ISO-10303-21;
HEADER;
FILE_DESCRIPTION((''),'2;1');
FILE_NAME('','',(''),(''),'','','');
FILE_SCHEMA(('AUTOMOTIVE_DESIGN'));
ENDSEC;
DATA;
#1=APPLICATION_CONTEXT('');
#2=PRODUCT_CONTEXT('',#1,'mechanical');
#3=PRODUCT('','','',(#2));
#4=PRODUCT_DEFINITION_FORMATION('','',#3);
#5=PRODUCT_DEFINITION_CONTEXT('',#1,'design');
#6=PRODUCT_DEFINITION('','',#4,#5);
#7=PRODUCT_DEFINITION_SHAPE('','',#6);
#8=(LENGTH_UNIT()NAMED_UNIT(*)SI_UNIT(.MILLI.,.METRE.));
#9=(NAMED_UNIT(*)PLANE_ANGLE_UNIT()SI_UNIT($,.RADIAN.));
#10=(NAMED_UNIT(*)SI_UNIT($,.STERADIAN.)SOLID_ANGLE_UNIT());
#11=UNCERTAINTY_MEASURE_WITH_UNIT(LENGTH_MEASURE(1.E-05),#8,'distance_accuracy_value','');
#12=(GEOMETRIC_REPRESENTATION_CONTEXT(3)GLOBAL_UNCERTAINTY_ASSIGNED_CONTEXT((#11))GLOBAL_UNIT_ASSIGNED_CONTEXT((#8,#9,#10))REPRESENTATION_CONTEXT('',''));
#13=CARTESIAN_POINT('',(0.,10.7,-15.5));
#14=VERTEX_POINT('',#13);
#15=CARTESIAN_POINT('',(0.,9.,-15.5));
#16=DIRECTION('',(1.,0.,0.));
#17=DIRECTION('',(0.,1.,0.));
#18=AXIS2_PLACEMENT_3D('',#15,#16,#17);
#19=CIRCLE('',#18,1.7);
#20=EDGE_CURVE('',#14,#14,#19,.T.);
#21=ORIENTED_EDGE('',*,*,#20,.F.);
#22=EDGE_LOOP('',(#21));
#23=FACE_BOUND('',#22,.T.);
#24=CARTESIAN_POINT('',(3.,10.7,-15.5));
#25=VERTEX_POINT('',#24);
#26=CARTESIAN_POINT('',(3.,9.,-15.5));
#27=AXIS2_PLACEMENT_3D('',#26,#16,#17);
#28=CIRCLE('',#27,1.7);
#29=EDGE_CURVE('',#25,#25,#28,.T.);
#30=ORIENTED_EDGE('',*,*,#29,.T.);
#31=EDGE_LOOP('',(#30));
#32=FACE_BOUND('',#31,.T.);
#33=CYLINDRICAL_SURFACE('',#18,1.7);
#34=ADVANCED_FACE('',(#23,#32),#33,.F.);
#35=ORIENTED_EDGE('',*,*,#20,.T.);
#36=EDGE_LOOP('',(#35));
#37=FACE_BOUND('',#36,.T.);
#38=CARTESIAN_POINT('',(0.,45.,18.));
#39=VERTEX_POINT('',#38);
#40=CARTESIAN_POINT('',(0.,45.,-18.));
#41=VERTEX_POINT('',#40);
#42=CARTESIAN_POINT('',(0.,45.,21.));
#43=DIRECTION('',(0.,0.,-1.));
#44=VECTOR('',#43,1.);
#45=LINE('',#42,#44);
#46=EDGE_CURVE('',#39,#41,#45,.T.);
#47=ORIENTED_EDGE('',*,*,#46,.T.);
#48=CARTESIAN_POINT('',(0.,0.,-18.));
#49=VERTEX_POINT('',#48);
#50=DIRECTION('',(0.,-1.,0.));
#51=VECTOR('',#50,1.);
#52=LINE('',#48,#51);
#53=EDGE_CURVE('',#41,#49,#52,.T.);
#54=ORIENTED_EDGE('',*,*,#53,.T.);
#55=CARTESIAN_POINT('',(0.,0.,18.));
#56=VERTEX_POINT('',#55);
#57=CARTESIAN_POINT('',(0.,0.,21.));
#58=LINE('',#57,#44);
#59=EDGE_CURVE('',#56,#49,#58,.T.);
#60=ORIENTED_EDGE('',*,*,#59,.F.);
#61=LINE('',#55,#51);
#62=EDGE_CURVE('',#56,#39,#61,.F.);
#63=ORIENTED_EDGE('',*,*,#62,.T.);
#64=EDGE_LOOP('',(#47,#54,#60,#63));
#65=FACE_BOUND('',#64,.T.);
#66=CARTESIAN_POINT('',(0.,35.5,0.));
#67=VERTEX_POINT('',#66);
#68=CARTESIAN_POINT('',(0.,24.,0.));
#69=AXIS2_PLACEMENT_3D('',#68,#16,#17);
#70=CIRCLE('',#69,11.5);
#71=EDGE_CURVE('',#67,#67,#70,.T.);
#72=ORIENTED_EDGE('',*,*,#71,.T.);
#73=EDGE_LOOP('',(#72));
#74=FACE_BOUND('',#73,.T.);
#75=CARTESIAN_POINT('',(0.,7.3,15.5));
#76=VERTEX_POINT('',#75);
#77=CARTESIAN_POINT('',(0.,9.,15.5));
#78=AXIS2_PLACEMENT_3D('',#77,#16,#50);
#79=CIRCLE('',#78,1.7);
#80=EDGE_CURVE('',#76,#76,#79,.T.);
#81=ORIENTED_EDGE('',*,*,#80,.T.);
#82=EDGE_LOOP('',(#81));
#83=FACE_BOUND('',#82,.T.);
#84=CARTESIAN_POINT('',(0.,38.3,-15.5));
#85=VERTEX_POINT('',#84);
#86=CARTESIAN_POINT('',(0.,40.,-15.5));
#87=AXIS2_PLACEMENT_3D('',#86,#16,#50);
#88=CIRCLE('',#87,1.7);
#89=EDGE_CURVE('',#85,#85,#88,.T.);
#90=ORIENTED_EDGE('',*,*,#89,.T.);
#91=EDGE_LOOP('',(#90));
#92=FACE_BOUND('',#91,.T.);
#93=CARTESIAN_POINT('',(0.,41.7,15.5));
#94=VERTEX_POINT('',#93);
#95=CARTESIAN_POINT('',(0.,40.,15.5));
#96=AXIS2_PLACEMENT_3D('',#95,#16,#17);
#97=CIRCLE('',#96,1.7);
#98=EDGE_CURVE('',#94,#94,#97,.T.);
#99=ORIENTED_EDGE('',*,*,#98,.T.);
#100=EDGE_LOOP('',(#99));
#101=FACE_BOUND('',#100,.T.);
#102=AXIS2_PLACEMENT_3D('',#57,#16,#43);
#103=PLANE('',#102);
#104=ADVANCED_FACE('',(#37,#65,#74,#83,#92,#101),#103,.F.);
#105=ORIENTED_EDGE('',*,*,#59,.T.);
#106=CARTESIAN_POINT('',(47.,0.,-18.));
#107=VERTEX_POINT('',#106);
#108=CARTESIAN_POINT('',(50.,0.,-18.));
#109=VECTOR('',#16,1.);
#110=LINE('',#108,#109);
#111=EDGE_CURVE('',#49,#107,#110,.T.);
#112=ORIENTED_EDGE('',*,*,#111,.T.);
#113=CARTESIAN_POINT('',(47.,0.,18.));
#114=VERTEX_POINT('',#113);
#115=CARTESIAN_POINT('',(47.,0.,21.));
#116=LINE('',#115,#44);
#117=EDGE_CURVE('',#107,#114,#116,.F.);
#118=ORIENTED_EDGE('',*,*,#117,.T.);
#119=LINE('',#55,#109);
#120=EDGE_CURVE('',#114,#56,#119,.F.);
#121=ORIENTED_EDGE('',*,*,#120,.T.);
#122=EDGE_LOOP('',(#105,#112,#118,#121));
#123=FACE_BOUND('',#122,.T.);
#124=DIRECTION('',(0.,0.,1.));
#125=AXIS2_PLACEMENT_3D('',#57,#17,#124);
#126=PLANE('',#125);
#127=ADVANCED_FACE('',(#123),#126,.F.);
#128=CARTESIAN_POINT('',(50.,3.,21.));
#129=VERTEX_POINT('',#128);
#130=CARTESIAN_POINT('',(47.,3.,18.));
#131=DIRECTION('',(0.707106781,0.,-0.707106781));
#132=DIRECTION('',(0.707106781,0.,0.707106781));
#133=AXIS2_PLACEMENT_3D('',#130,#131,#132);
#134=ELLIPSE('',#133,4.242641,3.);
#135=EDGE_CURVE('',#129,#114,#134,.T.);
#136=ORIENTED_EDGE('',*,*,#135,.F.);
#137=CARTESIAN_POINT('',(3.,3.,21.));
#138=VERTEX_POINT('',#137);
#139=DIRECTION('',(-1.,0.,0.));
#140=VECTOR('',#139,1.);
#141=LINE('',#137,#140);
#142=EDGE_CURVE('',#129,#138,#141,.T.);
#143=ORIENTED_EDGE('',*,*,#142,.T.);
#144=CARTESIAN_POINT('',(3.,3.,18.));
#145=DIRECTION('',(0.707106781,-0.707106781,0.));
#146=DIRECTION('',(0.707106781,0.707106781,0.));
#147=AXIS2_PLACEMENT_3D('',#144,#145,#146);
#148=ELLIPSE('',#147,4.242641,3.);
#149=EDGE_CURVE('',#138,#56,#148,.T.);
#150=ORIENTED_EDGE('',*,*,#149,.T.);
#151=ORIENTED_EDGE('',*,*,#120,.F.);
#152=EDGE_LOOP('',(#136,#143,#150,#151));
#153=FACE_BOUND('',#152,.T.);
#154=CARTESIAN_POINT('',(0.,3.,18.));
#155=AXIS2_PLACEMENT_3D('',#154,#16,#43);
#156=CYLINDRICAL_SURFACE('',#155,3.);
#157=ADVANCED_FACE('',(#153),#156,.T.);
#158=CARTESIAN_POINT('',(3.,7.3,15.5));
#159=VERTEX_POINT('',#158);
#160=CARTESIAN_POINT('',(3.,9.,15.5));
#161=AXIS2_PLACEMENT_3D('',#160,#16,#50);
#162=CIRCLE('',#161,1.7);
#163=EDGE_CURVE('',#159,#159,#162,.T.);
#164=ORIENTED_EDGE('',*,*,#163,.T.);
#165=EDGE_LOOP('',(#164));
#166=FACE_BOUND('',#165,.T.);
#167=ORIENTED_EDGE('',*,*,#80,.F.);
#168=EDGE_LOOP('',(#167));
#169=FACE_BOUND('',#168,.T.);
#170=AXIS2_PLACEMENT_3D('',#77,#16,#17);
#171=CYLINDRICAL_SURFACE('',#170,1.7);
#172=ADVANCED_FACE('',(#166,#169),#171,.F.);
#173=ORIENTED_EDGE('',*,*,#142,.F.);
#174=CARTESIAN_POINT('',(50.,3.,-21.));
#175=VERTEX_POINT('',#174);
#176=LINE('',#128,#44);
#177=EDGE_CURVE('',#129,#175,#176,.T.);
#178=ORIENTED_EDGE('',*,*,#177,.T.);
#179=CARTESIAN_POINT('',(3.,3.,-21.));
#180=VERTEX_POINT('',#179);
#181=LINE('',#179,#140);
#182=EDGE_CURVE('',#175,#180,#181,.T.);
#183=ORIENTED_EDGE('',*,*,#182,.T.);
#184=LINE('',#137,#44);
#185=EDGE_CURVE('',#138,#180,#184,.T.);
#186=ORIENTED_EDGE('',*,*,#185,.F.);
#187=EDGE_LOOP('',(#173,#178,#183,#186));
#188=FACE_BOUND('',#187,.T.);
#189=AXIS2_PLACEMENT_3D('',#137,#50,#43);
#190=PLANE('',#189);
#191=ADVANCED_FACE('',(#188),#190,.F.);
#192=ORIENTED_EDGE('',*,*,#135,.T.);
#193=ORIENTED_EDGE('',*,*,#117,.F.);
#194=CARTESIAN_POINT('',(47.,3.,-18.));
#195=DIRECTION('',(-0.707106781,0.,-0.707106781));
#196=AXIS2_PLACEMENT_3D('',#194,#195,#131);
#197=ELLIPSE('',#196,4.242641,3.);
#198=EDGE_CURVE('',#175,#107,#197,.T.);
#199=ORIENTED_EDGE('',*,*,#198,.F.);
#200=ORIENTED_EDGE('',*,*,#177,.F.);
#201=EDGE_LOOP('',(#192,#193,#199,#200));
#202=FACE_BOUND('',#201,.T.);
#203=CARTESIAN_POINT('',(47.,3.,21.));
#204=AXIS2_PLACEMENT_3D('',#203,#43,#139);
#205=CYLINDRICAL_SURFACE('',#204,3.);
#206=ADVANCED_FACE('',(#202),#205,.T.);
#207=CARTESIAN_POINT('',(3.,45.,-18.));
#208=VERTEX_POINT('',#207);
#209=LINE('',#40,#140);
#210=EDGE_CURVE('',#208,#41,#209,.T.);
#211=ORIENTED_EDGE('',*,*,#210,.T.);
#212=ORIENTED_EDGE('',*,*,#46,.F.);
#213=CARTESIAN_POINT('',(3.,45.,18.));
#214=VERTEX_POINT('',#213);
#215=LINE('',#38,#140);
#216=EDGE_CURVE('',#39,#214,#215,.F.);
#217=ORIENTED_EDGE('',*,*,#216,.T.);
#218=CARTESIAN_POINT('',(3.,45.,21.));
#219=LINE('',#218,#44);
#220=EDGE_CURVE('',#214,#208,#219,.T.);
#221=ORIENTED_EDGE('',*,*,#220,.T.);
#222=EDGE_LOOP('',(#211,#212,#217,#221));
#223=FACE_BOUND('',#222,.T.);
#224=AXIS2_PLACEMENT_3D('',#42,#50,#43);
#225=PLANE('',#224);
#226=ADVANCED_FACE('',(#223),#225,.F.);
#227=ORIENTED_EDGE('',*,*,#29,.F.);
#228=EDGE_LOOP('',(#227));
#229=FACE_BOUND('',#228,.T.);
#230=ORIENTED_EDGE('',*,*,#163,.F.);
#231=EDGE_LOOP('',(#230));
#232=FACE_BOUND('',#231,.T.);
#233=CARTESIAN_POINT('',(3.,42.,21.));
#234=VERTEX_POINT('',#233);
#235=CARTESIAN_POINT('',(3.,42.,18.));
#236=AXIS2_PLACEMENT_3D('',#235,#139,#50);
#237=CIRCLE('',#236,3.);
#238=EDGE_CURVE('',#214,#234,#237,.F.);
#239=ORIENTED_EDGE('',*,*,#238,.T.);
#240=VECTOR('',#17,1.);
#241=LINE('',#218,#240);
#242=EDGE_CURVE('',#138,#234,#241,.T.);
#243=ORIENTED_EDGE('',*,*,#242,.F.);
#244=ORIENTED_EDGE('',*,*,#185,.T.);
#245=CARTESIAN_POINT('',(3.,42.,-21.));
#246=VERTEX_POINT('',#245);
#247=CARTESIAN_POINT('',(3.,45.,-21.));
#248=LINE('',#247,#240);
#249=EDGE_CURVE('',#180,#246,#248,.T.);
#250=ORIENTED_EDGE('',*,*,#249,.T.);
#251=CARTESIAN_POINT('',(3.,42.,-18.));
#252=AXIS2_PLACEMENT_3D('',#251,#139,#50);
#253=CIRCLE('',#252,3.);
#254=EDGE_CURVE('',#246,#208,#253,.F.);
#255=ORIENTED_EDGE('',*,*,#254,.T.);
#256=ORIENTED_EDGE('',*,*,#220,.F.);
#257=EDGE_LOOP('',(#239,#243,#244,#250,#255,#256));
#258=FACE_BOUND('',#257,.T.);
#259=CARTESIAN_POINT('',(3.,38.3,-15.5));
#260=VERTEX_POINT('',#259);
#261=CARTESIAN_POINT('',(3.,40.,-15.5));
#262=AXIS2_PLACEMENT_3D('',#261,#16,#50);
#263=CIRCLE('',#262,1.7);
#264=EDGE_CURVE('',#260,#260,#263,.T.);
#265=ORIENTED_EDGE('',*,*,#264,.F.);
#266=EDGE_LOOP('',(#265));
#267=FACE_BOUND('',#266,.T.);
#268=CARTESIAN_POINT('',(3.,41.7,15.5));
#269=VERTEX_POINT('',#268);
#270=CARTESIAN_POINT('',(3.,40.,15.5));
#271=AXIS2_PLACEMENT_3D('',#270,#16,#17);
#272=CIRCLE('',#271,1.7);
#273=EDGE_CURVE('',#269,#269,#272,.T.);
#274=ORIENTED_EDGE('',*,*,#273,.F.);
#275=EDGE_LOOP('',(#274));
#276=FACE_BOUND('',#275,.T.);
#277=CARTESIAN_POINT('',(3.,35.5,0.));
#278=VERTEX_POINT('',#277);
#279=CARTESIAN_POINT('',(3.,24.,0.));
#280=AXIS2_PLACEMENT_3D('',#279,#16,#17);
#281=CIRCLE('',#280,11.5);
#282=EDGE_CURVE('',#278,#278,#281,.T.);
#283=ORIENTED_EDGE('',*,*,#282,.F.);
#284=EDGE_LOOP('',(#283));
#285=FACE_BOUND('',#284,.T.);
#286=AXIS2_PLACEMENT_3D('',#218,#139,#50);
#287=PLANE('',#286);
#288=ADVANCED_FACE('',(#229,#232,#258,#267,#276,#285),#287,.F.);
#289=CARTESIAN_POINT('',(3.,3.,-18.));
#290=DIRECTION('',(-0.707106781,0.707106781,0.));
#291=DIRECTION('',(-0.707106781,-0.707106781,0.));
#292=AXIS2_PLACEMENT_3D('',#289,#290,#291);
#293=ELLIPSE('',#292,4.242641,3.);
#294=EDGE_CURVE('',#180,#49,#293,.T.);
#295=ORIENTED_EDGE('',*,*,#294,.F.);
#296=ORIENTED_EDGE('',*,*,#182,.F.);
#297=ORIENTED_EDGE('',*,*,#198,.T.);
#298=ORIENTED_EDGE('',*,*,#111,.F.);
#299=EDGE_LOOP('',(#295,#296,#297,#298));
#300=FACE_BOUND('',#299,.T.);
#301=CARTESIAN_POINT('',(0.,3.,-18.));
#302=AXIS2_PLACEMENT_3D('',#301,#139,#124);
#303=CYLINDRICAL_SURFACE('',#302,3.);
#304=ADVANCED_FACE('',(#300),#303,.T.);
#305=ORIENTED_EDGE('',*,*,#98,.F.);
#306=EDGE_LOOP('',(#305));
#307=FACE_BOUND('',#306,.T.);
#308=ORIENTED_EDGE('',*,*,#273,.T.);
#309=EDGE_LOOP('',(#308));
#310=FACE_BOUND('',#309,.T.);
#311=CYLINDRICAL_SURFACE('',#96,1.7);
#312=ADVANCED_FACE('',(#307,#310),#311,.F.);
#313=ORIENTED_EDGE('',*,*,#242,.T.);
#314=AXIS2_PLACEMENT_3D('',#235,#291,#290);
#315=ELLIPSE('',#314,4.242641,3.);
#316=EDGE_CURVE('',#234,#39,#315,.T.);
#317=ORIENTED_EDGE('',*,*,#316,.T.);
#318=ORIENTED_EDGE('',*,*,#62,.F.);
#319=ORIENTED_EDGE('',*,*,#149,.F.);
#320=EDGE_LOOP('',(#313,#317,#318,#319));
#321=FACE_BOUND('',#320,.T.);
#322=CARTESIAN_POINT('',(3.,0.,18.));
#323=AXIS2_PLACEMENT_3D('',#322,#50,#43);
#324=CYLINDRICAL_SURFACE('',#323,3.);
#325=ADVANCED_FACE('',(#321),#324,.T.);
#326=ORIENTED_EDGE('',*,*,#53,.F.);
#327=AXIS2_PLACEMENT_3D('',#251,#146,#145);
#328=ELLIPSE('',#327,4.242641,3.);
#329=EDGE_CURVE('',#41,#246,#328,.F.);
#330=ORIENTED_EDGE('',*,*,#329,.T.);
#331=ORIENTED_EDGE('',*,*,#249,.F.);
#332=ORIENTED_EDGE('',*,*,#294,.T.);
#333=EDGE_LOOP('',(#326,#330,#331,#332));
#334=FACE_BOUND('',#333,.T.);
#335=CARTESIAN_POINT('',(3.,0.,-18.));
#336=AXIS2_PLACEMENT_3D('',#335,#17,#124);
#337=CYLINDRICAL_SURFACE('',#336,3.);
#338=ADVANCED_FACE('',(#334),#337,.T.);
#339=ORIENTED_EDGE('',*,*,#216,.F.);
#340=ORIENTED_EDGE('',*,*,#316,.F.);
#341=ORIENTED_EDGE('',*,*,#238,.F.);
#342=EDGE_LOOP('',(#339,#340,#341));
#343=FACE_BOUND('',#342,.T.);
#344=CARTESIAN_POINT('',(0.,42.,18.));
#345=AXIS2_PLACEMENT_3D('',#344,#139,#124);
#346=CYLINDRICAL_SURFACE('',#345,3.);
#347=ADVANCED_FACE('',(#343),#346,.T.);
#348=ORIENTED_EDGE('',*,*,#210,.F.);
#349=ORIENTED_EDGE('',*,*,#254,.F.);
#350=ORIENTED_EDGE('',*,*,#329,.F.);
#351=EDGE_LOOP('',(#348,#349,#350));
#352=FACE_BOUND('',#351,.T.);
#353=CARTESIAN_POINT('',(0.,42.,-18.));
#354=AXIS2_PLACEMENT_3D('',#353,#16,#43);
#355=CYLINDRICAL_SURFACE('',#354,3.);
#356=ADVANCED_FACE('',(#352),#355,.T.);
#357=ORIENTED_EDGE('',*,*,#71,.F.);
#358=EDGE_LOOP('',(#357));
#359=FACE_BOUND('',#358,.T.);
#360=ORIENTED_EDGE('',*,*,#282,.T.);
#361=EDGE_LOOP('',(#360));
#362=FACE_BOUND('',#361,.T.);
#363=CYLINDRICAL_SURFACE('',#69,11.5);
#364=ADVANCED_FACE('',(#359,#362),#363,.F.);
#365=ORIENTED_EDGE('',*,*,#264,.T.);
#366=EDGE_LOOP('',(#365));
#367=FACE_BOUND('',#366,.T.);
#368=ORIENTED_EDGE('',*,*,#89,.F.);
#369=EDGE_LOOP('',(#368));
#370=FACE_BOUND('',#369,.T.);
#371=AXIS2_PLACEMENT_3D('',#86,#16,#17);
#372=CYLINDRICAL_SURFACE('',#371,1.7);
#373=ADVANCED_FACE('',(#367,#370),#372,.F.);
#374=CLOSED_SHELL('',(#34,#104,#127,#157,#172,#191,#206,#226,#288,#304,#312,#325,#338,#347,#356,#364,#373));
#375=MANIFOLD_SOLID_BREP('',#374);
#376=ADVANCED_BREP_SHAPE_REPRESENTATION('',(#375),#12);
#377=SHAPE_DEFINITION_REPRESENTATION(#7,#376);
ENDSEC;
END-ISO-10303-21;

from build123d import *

# Parameters (mm, degrees)
BOSS_EXTRUDE1_DEPTH = 21
FILLET1_R           = 3
SKETCH2_R           = 11.5
SKETCH2_R_2         = 1.7
CUT_EXTRUDE2_DEPTH  = 69.373971656


with BuildPart() as part:
    # Sketch1 → Boss-Extrude1 (new, symmetric)
    with BuildSketch(Plane.XY):
        Polygon((0, 0), (0, 45), (3, 45), (3, 3), (50, 3), (50, 0), align=None)
    extrude(amount=BOSS_EXTRUDE1_DEPTH, both=True)

    # Fillet1
    fillet1_edges = [part.edges().sort_by_distance(p)[0] for p in [
        (0, 22.5, -21),
        (25, 0, -21),
        (50, 0, 0),
        (0, 22.5, 21),
        (25, 0, 21),
        (1.5, 45, -21),
        (1.5, 45, 21),
    ]]
    fillet(fillet1_edges, radius=FILLET1_R - 0.0001)  # a hair under: the kernel refuses the full size

    # Sketch2 → Cut-Extrude2 (cut, through all)
    with BuildSketch(Plane(origin=(3, 0, 0), x_dir=(0, 0, -1), z_dir=(1, 0, 0))):
        with Locations(Location((0, 24, 0), (0, 0, 90))):
            Circle(SKETCH2_R)
        with Locations(Location((-15.5, 40, 0), (0, 0, 90))):
            Circle(SKETCH2_R_2)
        with Locations(Location((-15.5, 9, 0), (0, 0, 270))):
            Circle(SKETCH2_R_2)
        with Locations(Location((15.5, 9, 0), (0, 0, 90))):
            Circle(SKETCH2_R_2)
        with Locations(Location((15.5, 40, 0), (0, 0, 270))):
            Circle(SKETCH2_R_2)
    extrude(amount=-CUT_EXTRUDE2_DEPTH, mode=Mode.SUBTRACT)


solid = part.part
